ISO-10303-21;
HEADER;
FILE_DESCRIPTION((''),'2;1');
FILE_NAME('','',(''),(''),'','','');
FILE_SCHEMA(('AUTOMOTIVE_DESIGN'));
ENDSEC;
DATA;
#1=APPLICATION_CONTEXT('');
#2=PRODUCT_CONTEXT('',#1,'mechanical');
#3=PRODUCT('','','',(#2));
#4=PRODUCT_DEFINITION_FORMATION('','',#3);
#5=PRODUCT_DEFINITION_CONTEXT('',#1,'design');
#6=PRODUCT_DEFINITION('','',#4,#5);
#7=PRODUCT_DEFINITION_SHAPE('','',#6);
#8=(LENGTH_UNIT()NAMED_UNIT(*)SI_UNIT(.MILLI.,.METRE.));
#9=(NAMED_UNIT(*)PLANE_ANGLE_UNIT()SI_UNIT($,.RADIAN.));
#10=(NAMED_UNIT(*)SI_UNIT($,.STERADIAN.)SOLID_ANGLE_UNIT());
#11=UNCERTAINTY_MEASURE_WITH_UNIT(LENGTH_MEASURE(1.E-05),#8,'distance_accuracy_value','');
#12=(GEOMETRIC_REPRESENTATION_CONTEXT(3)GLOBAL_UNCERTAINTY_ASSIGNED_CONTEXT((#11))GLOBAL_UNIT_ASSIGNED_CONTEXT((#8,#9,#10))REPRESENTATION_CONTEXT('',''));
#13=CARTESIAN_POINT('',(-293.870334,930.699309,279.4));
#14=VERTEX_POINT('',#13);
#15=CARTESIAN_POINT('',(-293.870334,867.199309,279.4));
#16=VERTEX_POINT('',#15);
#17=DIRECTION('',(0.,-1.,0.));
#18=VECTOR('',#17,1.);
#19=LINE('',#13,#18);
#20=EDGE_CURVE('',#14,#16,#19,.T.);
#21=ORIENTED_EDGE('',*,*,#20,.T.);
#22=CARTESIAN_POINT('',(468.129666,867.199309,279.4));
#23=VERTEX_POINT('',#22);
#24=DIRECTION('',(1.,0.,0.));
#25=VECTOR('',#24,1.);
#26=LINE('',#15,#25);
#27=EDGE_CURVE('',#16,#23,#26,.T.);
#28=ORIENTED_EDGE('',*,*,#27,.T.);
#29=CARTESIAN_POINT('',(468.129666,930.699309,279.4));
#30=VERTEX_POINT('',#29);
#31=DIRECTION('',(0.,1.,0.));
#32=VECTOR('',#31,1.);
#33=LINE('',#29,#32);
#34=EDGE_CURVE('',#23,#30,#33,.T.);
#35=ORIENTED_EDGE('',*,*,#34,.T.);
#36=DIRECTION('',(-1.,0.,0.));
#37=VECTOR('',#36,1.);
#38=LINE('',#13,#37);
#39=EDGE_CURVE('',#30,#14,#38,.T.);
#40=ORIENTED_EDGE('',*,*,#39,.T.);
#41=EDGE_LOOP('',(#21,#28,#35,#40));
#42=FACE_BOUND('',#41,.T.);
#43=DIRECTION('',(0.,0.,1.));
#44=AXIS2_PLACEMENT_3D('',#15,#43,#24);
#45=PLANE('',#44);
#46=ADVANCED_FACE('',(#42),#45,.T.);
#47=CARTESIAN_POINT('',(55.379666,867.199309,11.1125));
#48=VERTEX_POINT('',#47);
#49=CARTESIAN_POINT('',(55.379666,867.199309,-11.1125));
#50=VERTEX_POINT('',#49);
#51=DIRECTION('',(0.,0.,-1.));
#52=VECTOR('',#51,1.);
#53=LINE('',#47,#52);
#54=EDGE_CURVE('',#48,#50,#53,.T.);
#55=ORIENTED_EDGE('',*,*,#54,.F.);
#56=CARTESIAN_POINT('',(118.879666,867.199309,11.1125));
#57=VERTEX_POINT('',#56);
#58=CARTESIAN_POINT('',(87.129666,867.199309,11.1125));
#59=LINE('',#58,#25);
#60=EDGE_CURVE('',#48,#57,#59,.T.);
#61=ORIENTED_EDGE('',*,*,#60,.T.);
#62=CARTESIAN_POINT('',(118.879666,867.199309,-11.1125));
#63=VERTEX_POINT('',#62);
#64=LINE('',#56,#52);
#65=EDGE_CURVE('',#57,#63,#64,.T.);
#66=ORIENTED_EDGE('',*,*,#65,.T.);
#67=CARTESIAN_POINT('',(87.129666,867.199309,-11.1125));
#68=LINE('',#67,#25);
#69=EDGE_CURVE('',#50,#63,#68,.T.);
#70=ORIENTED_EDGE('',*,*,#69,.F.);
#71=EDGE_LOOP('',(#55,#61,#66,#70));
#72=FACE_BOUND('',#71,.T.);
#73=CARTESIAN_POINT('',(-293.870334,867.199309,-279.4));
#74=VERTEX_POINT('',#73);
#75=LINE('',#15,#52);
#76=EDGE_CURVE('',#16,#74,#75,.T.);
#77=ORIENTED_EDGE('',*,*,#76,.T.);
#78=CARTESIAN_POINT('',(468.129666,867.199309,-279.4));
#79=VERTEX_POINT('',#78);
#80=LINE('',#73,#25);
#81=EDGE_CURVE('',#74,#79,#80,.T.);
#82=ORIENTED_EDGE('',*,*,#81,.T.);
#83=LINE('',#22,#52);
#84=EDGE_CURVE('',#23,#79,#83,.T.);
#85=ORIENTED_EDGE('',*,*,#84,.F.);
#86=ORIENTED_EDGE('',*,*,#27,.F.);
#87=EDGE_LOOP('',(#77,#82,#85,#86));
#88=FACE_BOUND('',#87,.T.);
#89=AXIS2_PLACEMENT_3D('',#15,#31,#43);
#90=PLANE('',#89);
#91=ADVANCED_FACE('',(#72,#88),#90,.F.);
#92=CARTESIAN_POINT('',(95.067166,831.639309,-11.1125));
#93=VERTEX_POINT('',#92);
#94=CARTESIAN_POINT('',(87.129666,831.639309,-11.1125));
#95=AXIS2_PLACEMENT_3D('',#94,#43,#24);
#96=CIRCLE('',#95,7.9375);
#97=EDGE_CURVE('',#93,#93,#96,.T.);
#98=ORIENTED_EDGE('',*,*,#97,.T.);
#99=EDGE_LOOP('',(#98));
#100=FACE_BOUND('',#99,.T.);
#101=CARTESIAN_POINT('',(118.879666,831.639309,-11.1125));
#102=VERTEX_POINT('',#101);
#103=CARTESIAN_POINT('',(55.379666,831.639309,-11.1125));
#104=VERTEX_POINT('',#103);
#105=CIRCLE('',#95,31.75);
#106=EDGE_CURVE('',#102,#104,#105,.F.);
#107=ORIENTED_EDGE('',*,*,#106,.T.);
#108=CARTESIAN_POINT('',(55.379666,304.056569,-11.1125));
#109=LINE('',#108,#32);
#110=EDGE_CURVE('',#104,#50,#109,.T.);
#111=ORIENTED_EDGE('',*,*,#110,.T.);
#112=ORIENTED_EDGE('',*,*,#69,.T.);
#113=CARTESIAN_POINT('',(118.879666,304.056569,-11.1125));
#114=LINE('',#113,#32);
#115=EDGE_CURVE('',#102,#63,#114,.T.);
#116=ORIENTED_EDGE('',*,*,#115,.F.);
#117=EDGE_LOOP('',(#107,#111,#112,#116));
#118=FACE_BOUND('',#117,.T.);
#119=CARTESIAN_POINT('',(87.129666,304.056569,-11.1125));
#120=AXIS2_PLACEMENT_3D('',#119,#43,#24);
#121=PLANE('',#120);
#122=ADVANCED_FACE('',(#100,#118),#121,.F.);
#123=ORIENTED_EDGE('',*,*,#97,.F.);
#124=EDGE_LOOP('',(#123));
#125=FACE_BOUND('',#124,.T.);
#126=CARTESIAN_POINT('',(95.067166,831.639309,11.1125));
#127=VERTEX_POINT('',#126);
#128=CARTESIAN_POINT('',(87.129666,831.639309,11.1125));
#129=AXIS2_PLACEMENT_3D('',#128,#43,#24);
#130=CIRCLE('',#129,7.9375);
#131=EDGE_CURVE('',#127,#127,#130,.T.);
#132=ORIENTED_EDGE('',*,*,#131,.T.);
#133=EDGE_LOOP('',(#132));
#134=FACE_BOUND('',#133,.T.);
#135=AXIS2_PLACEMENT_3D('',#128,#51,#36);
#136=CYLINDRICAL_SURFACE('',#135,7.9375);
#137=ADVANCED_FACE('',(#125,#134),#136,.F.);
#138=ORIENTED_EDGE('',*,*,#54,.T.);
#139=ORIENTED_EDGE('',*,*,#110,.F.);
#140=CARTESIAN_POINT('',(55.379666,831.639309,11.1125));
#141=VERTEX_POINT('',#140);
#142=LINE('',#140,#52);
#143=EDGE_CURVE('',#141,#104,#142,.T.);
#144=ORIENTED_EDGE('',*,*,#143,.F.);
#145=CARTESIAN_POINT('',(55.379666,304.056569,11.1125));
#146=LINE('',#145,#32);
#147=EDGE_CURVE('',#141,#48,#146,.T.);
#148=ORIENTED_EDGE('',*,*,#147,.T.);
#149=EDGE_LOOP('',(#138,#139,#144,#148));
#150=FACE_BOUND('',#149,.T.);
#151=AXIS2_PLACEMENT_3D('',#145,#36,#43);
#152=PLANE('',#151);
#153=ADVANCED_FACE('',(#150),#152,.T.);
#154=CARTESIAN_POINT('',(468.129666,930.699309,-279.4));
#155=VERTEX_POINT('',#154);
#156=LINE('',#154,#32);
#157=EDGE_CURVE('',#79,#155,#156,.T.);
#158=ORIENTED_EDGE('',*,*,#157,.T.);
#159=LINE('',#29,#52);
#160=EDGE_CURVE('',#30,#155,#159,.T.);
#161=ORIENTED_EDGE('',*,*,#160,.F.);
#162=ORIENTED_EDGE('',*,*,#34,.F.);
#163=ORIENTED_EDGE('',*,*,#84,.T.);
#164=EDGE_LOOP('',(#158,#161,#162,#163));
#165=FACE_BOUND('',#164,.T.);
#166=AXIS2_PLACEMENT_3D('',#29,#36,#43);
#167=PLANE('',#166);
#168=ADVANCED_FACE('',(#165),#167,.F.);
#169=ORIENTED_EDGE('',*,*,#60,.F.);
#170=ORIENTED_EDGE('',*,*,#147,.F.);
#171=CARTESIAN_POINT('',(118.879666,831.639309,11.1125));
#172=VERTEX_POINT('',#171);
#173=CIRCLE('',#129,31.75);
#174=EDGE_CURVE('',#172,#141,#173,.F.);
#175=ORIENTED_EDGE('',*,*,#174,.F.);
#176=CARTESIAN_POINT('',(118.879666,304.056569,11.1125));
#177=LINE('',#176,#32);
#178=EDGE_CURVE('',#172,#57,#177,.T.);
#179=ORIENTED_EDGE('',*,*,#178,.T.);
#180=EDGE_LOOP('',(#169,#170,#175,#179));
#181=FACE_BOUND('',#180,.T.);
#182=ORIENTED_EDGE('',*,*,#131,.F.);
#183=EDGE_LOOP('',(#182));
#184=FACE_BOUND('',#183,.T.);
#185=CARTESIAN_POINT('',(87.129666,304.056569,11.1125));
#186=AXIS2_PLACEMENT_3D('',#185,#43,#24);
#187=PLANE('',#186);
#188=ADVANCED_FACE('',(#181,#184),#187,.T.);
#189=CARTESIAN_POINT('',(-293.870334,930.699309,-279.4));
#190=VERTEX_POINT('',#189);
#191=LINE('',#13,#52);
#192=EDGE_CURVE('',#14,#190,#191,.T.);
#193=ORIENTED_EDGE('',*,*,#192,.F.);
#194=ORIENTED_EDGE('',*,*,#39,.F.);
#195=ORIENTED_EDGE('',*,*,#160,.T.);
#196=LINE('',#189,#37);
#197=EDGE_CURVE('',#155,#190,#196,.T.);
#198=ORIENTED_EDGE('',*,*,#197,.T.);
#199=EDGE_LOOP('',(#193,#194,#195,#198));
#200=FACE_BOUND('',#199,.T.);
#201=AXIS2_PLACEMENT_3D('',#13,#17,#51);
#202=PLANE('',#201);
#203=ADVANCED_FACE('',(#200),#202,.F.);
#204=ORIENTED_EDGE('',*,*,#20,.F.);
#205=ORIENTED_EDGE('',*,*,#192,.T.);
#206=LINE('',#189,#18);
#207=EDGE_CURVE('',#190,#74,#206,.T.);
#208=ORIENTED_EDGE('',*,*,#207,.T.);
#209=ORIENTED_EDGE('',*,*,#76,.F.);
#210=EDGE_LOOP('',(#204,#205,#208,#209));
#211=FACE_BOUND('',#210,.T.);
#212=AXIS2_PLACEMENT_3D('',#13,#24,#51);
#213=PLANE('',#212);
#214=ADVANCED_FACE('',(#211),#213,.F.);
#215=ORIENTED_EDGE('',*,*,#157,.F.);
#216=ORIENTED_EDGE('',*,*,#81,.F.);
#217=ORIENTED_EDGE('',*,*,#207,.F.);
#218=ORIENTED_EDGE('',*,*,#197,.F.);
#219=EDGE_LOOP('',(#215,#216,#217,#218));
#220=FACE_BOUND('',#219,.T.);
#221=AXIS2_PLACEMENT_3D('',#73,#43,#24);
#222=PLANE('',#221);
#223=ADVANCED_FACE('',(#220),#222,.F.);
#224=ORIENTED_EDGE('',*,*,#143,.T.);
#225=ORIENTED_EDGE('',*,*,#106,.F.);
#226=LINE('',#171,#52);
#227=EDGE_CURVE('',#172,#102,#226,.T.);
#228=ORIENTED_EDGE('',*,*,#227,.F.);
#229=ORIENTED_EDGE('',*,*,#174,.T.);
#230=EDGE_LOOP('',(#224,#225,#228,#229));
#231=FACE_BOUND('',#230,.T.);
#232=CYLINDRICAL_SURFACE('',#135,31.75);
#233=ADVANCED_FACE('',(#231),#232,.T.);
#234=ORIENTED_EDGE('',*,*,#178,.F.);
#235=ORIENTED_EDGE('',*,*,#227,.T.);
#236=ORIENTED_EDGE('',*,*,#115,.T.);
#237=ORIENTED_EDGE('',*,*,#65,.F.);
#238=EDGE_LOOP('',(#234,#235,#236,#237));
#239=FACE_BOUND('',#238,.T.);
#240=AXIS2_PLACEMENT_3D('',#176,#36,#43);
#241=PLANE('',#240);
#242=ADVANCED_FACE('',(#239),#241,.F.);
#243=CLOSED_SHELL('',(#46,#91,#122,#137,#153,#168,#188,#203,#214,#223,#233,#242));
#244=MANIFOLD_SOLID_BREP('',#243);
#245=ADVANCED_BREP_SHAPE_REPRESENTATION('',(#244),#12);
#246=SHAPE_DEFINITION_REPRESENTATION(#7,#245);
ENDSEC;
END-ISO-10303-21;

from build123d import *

# Parameters (mm, degrees)
EXTRUDE2_START     = -11.1125
EXTRUDE2_OUTLINE_R = 7.9375
EXTRUDE2_DEPTH     = 22.225
SKETCH2_W          = 762
SKETCH2_H          = 63.5
EXTRUDE3_DEPTH     = 279.4


# Read off the part's stored shape, not the designer's step: Extrude2
with BuildPart() as part:
    # Extrude2 outline → Extrude2 (new body)
    with BuildSketch(Plane.XY.offset(EXTRUDE2_START)):
        with BuildLine():
            ThreePointArc((55.379666285, 831.639308698), (87.129666285, 799.889308698), (118.879666285, 831.639308698))
            Line((118.879666285, 831.639308698), (118.879666285, 867.199308698))
            Line((118.879666285, 867.199308698), (55.379666285, 867.199308698))
            Line((55.379666285, 867.199308698), (55.379666285, 831.639308698))
        make_face()
        with Locations((87.129666285, 831.639308698)):
            Circle(EXTRUDE2_OUTLINE_R, mode=Mode.SUBTRACT)
    extrude(amount=EXTRUDE2_DEPTH)

    # Sketch2 → Extrude3 (add, symmetric)
    with BuildSketch(Plane.XY):
        with Locations((87.129666285, 898.949308698)):
            Rectangle(SKETCH2_W, SKETCH2_H)
    extrude(amount=EXTRUDE3_DEPTH, both=True)


solid = part.part
